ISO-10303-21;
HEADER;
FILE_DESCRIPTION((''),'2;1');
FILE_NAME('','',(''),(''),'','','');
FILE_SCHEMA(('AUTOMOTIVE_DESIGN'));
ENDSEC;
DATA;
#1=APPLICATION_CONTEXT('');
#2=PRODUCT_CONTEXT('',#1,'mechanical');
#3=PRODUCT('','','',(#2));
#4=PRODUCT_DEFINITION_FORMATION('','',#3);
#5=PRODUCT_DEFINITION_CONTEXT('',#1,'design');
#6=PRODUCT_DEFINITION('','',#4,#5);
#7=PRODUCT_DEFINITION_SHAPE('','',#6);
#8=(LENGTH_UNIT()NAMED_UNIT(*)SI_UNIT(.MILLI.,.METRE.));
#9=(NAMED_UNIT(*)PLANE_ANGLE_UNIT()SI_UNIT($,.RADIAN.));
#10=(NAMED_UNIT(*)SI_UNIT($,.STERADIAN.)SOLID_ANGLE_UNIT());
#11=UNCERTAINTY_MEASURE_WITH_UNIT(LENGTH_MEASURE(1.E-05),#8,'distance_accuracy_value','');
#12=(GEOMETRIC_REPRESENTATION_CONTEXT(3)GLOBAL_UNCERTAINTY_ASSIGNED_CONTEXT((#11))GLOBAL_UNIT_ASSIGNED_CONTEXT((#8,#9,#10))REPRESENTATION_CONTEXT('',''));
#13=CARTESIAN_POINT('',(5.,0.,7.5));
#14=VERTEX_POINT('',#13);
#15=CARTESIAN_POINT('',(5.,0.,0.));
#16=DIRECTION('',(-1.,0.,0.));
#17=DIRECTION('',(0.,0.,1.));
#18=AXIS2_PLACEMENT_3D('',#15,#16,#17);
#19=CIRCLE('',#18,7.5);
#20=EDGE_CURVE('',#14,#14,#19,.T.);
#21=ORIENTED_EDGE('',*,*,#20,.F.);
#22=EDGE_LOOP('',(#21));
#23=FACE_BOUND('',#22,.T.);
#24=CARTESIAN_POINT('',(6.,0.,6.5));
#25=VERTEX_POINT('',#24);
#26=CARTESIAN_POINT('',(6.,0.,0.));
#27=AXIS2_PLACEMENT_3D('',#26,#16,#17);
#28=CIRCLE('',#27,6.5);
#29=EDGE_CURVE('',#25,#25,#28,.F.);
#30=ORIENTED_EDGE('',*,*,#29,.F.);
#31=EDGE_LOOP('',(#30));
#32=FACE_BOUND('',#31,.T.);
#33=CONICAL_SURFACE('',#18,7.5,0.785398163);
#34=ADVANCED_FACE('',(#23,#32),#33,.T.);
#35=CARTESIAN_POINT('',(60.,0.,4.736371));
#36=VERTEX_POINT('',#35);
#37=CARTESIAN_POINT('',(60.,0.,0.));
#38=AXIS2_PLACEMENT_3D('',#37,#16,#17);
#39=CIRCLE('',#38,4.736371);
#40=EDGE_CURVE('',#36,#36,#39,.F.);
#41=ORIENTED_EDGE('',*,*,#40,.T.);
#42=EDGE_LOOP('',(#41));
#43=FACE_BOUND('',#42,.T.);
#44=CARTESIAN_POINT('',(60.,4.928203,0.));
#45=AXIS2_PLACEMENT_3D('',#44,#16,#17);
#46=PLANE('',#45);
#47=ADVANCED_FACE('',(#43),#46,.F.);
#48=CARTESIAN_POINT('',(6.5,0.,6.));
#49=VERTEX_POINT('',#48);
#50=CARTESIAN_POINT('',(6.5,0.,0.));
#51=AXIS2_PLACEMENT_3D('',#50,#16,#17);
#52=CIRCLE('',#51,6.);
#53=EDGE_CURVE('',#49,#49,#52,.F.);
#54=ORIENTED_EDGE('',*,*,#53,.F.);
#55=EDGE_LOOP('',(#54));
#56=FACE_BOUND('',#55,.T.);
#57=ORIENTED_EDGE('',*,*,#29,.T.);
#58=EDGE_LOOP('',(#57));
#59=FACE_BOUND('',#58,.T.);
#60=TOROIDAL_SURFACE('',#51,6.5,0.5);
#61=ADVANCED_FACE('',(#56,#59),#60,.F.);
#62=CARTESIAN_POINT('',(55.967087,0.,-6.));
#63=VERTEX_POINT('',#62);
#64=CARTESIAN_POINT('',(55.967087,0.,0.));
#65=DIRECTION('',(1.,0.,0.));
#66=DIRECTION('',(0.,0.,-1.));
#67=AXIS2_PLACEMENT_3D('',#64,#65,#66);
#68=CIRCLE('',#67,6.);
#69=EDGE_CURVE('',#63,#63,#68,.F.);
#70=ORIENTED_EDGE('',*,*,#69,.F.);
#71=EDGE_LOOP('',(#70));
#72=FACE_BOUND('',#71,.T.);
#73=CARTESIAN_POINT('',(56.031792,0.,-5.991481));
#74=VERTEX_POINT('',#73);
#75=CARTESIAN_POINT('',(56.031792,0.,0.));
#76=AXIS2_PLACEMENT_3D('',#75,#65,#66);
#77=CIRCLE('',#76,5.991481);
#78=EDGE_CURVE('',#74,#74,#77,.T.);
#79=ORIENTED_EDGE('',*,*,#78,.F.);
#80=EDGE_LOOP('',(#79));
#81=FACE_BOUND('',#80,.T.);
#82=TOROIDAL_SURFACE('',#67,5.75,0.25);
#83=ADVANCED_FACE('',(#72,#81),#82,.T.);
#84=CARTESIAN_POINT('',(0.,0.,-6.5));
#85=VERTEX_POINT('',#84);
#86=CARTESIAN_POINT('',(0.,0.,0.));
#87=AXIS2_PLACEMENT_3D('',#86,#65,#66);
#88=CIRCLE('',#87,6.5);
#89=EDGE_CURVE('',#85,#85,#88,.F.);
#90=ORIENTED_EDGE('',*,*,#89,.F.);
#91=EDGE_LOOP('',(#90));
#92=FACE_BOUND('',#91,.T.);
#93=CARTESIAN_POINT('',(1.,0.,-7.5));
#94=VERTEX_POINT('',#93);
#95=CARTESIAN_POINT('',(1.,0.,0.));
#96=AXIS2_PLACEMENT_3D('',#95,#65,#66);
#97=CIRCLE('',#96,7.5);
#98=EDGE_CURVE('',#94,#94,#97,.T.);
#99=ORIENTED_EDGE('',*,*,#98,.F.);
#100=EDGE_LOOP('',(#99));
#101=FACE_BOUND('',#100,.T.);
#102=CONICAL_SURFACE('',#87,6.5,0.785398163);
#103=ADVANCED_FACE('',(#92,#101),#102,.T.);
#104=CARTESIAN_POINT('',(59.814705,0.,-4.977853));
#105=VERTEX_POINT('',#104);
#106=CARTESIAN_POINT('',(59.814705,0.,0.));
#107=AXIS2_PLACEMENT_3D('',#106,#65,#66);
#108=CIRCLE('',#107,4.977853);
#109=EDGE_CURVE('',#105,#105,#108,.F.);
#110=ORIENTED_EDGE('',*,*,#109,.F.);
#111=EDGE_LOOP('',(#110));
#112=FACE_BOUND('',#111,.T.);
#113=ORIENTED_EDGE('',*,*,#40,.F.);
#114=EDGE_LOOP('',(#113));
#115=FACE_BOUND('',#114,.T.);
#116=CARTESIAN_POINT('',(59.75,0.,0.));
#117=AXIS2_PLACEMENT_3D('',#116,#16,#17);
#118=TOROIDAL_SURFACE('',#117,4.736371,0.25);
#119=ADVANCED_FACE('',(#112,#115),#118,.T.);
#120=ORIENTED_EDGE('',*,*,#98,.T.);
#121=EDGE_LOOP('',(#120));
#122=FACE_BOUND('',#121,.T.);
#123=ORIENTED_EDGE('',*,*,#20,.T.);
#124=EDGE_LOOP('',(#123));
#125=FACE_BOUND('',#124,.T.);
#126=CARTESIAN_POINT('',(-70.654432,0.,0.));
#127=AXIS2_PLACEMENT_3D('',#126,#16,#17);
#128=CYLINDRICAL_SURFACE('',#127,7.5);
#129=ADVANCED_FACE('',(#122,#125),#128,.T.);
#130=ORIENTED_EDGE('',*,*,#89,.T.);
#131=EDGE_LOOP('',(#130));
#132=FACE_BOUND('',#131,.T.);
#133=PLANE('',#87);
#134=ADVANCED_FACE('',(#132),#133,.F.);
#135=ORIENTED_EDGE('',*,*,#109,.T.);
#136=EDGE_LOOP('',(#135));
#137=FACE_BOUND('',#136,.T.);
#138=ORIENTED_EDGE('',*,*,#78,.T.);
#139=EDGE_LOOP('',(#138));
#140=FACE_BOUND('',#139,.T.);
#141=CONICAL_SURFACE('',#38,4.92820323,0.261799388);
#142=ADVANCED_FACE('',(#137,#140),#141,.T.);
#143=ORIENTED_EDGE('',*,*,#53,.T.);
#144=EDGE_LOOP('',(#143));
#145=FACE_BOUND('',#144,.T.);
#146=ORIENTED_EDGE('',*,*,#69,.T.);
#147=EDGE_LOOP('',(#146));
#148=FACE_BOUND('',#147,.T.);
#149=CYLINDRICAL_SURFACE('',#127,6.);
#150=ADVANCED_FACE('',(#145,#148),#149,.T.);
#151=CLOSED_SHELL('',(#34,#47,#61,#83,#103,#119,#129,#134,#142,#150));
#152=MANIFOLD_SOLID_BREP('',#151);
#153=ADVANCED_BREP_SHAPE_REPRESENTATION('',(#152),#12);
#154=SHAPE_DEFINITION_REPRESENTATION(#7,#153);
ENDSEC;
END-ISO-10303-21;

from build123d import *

# Parameters (mm, degrees)
CHAMFER_1_SIZE = 1
FILLET_1_R     = 0.5
FILLET_2_R     = 0.25


with BuildPart() as part:
    # 草图2 → 旋转1 (revolve)
    with BuildSketch(Plane.XY, mode=Mode.PRIVATE) as revolve_1_sk:
        Polygon((0, 0), (0, 7.5), (6, 7.5), (6, 6), (56, 6), (60, 4.92820323), (60, 0), align=None)
    revolve(revolve_1_sk.sketch.rotate(Axis((-70.654432031, 0, 0), (1, 0, 0)), 90), axis=Axis((-70.654432031, 0, 0), (1, 0, 0)))

    # 倒角1
    chamfer_1_edges = [part.edges().sort_by_distance(p)[0] for p in [
        (6, 0, -7.5),
        (0, 0, -7.5),
    ]]
    chamfer(chamfer_1_edges, length=CHAMFER_1_SIZE)

    # 圆角1
    fillet_1_edges = [part.edges().sort_by_distance(p)[0] for p in [
        (6, 0, -6),
    ]]
    fillet(fillet_1_edges, radius=FILLET_1_R - 0.0001)  # a hair under: the kernel refuses the full size

    # 圆角2
    fillet_2_edges = [part.edges().sort_by_distance(p)[0] for p in [
        (60, 0, -4.92820323),
        (56, 0, -6),
    ]]
    fillet(fillet_2_edges, radius=FILLET_2_R)


solid = part.part
